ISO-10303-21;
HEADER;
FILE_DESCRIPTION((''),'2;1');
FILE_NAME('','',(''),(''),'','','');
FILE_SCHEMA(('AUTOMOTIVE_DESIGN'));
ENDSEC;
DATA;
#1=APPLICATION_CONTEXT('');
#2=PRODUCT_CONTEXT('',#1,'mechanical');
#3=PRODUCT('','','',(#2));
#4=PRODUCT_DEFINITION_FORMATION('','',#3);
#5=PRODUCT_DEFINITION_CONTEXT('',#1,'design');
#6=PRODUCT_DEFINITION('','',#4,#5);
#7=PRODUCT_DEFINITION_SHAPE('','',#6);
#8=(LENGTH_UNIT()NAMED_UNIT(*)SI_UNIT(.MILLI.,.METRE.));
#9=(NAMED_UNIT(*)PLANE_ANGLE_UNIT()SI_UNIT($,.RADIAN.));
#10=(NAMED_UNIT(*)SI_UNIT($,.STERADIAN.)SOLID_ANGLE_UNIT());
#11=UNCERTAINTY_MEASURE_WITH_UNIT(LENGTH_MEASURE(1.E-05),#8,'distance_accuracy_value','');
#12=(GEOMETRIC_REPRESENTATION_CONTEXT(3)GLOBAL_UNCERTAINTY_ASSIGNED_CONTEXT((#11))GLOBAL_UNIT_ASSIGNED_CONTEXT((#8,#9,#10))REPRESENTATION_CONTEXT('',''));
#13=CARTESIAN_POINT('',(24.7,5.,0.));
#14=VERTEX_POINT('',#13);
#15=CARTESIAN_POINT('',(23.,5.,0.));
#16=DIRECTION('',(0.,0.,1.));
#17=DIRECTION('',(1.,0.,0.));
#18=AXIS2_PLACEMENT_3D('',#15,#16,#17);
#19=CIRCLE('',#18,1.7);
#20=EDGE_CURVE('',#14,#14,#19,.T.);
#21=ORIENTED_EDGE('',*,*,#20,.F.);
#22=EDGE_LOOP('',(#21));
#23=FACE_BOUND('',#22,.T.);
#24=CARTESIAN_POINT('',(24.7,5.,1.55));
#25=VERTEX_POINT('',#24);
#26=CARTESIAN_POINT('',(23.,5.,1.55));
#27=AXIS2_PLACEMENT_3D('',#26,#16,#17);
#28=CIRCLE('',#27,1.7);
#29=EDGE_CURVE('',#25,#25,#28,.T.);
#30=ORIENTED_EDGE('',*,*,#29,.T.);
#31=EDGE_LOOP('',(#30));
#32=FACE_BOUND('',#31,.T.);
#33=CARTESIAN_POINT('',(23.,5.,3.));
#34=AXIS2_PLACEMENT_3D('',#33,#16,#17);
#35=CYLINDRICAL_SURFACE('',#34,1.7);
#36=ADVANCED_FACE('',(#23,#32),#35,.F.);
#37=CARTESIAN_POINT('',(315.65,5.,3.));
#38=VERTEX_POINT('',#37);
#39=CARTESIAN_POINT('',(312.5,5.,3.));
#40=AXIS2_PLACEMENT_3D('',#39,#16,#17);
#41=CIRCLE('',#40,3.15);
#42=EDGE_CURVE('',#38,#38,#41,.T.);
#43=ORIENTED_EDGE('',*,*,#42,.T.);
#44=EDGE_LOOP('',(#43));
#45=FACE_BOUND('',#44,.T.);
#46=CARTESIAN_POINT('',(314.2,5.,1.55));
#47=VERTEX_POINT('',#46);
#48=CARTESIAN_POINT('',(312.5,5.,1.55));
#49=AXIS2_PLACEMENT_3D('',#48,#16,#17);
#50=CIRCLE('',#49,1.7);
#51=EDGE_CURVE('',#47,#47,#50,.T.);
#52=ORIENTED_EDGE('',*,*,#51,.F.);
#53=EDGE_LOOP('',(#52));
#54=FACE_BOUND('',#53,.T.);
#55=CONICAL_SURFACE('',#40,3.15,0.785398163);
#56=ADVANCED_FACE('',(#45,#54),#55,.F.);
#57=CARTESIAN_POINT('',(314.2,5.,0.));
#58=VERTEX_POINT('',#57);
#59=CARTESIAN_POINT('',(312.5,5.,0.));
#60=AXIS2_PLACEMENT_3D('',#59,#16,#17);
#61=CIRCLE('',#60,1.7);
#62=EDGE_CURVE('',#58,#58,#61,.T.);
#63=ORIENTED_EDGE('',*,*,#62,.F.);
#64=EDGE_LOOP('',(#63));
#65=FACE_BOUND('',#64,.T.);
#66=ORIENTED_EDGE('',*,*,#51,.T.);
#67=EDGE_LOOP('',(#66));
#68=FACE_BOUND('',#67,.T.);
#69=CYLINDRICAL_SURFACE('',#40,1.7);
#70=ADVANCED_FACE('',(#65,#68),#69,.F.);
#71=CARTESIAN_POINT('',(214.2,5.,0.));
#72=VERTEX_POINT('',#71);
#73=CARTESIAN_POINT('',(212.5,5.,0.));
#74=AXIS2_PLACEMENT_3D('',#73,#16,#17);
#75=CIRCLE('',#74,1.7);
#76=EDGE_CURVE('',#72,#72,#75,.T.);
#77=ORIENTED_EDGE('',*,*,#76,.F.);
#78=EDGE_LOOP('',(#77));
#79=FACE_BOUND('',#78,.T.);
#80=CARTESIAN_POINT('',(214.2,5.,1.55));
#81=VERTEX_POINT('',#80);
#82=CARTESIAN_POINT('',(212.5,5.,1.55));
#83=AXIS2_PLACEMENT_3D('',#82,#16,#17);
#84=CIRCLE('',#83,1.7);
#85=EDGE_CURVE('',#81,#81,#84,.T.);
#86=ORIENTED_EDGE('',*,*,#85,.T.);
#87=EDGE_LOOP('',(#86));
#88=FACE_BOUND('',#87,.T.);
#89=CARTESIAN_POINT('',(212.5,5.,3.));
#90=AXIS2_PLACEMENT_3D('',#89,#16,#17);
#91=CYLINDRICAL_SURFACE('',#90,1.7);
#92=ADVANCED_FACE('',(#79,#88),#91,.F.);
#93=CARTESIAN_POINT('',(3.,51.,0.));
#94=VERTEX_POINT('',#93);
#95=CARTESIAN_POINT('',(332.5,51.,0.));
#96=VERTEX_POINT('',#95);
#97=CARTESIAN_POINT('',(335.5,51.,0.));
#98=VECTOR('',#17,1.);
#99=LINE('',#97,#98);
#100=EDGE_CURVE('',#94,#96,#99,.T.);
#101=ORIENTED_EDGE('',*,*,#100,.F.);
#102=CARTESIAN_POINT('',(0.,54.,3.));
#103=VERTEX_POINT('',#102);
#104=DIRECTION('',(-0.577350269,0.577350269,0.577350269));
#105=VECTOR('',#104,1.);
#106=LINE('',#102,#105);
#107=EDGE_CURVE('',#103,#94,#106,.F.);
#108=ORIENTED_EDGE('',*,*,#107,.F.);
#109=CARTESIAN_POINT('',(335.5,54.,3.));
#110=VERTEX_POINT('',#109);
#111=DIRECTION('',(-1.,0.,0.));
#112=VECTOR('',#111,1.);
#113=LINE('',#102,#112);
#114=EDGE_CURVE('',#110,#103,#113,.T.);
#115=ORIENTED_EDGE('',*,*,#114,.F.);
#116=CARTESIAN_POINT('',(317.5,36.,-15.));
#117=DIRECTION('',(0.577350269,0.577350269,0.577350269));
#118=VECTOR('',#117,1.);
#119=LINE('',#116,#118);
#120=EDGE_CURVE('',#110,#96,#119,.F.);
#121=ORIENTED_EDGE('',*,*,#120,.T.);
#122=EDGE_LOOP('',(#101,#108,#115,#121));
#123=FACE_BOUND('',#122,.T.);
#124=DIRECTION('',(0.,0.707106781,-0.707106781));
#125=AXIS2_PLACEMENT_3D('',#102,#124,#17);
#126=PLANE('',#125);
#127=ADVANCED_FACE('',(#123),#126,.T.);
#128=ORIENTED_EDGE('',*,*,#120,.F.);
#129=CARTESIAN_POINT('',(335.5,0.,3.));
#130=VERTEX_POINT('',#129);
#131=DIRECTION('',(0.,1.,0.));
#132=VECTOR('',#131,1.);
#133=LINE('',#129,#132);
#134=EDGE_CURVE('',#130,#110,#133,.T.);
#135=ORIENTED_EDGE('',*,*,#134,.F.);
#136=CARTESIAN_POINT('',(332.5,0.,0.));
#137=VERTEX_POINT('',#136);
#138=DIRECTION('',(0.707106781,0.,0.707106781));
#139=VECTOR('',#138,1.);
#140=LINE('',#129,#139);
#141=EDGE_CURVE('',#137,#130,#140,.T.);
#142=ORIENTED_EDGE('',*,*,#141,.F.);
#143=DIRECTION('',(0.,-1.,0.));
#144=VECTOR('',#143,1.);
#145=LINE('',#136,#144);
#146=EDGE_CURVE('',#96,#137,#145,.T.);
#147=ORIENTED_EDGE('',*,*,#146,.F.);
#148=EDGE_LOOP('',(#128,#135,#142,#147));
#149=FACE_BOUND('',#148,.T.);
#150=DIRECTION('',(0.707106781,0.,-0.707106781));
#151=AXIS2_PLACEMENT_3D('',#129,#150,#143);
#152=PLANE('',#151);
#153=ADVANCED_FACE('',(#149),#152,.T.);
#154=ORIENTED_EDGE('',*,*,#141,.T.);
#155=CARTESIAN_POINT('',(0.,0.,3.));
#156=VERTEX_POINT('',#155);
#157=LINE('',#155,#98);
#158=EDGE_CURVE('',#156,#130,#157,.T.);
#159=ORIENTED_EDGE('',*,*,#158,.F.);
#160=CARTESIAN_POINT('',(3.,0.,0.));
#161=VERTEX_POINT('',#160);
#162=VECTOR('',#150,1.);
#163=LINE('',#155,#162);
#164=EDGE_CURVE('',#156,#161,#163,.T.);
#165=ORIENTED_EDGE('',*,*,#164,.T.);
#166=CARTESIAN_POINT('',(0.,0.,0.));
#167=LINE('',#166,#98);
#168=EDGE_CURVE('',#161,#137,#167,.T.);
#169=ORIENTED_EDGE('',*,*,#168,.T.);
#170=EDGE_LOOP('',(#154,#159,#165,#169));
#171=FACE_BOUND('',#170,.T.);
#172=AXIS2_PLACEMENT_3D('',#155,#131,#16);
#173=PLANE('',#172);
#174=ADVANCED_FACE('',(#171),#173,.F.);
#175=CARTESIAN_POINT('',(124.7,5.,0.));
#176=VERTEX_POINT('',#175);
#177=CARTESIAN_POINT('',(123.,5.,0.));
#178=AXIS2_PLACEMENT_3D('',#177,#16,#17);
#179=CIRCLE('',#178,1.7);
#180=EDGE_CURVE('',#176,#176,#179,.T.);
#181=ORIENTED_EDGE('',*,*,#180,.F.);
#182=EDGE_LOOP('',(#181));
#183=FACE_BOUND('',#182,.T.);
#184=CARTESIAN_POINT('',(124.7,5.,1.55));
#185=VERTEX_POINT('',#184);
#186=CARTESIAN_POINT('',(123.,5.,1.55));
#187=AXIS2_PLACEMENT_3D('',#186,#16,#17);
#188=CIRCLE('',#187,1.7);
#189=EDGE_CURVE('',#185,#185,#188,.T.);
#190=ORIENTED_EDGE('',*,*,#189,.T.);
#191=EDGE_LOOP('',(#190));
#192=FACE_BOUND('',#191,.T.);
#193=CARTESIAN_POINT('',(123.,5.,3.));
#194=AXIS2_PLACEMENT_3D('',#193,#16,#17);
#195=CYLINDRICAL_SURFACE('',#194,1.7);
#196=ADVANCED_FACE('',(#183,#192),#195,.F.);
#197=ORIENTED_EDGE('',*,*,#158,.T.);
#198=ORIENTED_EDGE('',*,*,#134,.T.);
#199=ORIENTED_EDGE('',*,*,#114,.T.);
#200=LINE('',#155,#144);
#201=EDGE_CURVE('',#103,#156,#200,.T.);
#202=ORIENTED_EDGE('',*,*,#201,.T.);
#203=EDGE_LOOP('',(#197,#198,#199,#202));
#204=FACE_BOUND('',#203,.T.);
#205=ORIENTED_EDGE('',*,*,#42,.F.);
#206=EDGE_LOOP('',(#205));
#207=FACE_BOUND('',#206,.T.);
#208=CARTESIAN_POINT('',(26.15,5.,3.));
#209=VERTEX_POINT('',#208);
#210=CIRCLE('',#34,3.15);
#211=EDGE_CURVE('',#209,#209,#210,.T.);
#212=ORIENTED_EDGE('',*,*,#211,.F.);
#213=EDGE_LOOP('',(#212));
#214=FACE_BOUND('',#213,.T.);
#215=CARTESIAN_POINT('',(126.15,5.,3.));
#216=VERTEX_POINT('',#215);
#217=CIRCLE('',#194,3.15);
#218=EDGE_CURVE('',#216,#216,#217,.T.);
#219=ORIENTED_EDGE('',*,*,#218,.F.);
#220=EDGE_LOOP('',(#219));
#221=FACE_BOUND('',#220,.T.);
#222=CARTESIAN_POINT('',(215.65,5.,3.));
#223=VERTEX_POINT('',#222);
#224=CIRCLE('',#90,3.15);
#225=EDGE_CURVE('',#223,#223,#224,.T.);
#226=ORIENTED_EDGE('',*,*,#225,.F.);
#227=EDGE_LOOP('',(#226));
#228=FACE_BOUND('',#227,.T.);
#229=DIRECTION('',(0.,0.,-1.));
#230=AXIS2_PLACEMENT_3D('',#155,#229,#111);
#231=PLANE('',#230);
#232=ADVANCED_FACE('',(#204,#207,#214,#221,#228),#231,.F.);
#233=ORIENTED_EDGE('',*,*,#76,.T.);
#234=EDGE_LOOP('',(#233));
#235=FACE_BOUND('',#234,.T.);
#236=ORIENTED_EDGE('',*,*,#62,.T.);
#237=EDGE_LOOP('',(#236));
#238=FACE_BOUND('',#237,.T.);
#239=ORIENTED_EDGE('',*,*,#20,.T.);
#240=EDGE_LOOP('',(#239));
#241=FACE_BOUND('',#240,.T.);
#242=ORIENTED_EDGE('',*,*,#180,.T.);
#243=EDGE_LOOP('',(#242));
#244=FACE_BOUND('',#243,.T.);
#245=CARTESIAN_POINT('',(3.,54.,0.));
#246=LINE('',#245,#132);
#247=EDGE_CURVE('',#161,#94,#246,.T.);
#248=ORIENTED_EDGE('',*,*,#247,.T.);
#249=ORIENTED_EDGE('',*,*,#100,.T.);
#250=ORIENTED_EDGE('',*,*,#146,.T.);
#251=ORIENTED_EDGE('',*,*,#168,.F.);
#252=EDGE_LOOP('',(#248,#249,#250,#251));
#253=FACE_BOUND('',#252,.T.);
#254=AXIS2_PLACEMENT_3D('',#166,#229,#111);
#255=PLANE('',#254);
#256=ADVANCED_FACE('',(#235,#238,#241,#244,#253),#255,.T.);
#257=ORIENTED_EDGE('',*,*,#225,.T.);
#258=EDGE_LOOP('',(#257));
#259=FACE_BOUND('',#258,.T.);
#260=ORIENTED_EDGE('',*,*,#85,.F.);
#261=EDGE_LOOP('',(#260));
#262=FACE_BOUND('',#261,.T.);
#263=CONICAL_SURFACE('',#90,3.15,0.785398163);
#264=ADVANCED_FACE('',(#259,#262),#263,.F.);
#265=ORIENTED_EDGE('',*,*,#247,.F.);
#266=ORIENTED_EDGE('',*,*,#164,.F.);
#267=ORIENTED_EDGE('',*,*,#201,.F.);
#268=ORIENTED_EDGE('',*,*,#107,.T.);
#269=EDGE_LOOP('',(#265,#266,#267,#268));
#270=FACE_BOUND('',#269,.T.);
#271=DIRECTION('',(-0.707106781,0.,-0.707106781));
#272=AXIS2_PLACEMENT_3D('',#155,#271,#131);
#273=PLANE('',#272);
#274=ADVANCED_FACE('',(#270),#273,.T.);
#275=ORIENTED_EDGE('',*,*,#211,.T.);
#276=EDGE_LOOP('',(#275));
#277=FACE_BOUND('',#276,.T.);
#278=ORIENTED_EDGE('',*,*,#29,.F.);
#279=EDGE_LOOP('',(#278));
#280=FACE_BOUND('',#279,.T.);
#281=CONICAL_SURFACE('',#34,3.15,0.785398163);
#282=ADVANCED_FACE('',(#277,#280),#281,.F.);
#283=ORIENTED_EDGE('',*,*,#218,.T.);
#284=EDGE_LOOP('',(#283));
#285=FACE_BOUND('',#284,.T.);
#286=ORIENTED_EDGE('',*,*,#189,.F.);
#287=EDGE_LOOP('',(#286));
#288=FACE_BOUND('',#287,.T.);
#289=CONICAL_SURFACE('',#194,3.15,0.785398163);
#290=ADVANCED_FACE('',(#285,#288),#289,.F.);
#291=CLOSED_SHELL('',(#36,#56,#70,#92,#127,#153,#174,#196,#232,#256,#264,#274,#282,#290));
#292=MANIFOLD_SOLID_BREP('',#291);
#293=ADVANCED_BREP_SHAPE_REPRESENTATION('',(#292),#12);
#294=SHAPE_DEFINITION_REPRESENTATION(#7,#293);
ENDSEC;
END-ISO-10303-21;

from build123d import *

# Parameters (mm, degrees)
SKETCH1_W                                      = 335.5
SKETCH1_H                                      = 54
BOSS_EXTRUDE1_DEPTH                            = 3
CHAMFER1_SIZE                                  = 3
CSK_FOR_M3_FLAT_HEAD_MACHINE_SCREW1_AT_2_COUNT = 2
CSK_FOR_M3_FLAT_HEAD_MACHINE_SCREW1_AT_2_PITCH = 100
CSK_FOR_M3_FLAT_HEAD_MACHINE_SCREW1_AT_3_COUNT = 2
CSK_FOR_M3_FLAT_HEAD_MACHINE_SCREW1_AT_3_PITCH = 189.5
CSK_FOR_M3_FLAT_HEAD_MACHINE_SCREW1_AT_4_COUNT = 2
CSK_FOR_M3_FLAT_HEAD_MACHINE_SCREW1_AT_4_PITCH = 289.5


with BuildPart() as part:
    # Sketch1 → Boss-Extrude1 (new body)
    with BuildSketch(Plane.XY):
        with Locations((167.75, 27)):
            Rectangle(SKETCH1_W, SKETCH1_H)
    extrude(amount=BOSS_EXTRUDE1_DEPTH)

    # Chamfer1
    chamfer1_edges = [part.edges().sort_by_distance(p)[0] for p in [
        (0, 27, 0),
        (167.75, 54, 0),
        (335.5, 27, 0),
    ]]
    chamfer(chamfer1_edges, length=CHAMFER1_SIZE - 0.0001)  # a hair under: the kernel refuses the full size

    # Sketch3 → CSK for M3 Flat Head Machine Screw1 (revolve, cut)
    with BuildSketch(Plane(origin=(23, 5, 3), x_dir=(0, -1, 0), z_dir=(1, 0, 0))):
        Polygon((0, 0), (0, 3), (1.7, 3), (1.7, 1.45), (3.15, 0), align=None)
    csk_for_m3_flat_head_machine_screw1 = revolve(axis=Axis((23, 5, 9.35), (0, 0, -1)), mode=Mode.SUBTRACT)

    # CSK for M3 Flat Head Machine Screw1 at 2: CSK for M3 Flat Head Machine Screw1 ×2
    with Locations(*[(i * CSK_FOR_M3_FLAT_HEAD_MACHINE_SCREW1_AT_2_PITCH, 0, 0) for i in range(1, CSK_FOR_M3_FLAT_HEAD_MACHINE_SCREW1_AT_2_COUNT)]):
        add(csk_for_m3_flat_head_machine_screw1, mode=Mode.SUBTRACT)

    # CSK for M3 Flat Head Machine Screw1 at 3: CSK for M3 Flat Head Machine Screw1 ×2
    with Locations(*[(i * CSK_FOR_M3_FLAT_HEAD_MACHINE_SCREW1_AT_3_PITCH, 0, 0) for i in range(1, CSK_FOR_M3_FLAT_HEAD_MACHINE_SCREW1_AT_3_COUNT)]):
        add(csk_for_m3_flat_head_machine_screw1, mode=Mode.SUBTRACT)

    # CSK for M3 Flat Head Machine Screw1 at 4: CSK for M3 Flat Head Machine Screw1 ×2
    with Locations(*[(i * CSK_FOR_M3_FLAT_HEAD_MACHINE_SCREW1_AT_4_PITCH, 0, 0) for i in range(1, CSK_FOR_M3_FLAT_HEAD_MACHINE_SCREW1_AT_4_COUNT)]):
        add(csk_for_m3_flat_head_machine_screw1, mode=Mode.SUBTRACT)


solid = part.part
